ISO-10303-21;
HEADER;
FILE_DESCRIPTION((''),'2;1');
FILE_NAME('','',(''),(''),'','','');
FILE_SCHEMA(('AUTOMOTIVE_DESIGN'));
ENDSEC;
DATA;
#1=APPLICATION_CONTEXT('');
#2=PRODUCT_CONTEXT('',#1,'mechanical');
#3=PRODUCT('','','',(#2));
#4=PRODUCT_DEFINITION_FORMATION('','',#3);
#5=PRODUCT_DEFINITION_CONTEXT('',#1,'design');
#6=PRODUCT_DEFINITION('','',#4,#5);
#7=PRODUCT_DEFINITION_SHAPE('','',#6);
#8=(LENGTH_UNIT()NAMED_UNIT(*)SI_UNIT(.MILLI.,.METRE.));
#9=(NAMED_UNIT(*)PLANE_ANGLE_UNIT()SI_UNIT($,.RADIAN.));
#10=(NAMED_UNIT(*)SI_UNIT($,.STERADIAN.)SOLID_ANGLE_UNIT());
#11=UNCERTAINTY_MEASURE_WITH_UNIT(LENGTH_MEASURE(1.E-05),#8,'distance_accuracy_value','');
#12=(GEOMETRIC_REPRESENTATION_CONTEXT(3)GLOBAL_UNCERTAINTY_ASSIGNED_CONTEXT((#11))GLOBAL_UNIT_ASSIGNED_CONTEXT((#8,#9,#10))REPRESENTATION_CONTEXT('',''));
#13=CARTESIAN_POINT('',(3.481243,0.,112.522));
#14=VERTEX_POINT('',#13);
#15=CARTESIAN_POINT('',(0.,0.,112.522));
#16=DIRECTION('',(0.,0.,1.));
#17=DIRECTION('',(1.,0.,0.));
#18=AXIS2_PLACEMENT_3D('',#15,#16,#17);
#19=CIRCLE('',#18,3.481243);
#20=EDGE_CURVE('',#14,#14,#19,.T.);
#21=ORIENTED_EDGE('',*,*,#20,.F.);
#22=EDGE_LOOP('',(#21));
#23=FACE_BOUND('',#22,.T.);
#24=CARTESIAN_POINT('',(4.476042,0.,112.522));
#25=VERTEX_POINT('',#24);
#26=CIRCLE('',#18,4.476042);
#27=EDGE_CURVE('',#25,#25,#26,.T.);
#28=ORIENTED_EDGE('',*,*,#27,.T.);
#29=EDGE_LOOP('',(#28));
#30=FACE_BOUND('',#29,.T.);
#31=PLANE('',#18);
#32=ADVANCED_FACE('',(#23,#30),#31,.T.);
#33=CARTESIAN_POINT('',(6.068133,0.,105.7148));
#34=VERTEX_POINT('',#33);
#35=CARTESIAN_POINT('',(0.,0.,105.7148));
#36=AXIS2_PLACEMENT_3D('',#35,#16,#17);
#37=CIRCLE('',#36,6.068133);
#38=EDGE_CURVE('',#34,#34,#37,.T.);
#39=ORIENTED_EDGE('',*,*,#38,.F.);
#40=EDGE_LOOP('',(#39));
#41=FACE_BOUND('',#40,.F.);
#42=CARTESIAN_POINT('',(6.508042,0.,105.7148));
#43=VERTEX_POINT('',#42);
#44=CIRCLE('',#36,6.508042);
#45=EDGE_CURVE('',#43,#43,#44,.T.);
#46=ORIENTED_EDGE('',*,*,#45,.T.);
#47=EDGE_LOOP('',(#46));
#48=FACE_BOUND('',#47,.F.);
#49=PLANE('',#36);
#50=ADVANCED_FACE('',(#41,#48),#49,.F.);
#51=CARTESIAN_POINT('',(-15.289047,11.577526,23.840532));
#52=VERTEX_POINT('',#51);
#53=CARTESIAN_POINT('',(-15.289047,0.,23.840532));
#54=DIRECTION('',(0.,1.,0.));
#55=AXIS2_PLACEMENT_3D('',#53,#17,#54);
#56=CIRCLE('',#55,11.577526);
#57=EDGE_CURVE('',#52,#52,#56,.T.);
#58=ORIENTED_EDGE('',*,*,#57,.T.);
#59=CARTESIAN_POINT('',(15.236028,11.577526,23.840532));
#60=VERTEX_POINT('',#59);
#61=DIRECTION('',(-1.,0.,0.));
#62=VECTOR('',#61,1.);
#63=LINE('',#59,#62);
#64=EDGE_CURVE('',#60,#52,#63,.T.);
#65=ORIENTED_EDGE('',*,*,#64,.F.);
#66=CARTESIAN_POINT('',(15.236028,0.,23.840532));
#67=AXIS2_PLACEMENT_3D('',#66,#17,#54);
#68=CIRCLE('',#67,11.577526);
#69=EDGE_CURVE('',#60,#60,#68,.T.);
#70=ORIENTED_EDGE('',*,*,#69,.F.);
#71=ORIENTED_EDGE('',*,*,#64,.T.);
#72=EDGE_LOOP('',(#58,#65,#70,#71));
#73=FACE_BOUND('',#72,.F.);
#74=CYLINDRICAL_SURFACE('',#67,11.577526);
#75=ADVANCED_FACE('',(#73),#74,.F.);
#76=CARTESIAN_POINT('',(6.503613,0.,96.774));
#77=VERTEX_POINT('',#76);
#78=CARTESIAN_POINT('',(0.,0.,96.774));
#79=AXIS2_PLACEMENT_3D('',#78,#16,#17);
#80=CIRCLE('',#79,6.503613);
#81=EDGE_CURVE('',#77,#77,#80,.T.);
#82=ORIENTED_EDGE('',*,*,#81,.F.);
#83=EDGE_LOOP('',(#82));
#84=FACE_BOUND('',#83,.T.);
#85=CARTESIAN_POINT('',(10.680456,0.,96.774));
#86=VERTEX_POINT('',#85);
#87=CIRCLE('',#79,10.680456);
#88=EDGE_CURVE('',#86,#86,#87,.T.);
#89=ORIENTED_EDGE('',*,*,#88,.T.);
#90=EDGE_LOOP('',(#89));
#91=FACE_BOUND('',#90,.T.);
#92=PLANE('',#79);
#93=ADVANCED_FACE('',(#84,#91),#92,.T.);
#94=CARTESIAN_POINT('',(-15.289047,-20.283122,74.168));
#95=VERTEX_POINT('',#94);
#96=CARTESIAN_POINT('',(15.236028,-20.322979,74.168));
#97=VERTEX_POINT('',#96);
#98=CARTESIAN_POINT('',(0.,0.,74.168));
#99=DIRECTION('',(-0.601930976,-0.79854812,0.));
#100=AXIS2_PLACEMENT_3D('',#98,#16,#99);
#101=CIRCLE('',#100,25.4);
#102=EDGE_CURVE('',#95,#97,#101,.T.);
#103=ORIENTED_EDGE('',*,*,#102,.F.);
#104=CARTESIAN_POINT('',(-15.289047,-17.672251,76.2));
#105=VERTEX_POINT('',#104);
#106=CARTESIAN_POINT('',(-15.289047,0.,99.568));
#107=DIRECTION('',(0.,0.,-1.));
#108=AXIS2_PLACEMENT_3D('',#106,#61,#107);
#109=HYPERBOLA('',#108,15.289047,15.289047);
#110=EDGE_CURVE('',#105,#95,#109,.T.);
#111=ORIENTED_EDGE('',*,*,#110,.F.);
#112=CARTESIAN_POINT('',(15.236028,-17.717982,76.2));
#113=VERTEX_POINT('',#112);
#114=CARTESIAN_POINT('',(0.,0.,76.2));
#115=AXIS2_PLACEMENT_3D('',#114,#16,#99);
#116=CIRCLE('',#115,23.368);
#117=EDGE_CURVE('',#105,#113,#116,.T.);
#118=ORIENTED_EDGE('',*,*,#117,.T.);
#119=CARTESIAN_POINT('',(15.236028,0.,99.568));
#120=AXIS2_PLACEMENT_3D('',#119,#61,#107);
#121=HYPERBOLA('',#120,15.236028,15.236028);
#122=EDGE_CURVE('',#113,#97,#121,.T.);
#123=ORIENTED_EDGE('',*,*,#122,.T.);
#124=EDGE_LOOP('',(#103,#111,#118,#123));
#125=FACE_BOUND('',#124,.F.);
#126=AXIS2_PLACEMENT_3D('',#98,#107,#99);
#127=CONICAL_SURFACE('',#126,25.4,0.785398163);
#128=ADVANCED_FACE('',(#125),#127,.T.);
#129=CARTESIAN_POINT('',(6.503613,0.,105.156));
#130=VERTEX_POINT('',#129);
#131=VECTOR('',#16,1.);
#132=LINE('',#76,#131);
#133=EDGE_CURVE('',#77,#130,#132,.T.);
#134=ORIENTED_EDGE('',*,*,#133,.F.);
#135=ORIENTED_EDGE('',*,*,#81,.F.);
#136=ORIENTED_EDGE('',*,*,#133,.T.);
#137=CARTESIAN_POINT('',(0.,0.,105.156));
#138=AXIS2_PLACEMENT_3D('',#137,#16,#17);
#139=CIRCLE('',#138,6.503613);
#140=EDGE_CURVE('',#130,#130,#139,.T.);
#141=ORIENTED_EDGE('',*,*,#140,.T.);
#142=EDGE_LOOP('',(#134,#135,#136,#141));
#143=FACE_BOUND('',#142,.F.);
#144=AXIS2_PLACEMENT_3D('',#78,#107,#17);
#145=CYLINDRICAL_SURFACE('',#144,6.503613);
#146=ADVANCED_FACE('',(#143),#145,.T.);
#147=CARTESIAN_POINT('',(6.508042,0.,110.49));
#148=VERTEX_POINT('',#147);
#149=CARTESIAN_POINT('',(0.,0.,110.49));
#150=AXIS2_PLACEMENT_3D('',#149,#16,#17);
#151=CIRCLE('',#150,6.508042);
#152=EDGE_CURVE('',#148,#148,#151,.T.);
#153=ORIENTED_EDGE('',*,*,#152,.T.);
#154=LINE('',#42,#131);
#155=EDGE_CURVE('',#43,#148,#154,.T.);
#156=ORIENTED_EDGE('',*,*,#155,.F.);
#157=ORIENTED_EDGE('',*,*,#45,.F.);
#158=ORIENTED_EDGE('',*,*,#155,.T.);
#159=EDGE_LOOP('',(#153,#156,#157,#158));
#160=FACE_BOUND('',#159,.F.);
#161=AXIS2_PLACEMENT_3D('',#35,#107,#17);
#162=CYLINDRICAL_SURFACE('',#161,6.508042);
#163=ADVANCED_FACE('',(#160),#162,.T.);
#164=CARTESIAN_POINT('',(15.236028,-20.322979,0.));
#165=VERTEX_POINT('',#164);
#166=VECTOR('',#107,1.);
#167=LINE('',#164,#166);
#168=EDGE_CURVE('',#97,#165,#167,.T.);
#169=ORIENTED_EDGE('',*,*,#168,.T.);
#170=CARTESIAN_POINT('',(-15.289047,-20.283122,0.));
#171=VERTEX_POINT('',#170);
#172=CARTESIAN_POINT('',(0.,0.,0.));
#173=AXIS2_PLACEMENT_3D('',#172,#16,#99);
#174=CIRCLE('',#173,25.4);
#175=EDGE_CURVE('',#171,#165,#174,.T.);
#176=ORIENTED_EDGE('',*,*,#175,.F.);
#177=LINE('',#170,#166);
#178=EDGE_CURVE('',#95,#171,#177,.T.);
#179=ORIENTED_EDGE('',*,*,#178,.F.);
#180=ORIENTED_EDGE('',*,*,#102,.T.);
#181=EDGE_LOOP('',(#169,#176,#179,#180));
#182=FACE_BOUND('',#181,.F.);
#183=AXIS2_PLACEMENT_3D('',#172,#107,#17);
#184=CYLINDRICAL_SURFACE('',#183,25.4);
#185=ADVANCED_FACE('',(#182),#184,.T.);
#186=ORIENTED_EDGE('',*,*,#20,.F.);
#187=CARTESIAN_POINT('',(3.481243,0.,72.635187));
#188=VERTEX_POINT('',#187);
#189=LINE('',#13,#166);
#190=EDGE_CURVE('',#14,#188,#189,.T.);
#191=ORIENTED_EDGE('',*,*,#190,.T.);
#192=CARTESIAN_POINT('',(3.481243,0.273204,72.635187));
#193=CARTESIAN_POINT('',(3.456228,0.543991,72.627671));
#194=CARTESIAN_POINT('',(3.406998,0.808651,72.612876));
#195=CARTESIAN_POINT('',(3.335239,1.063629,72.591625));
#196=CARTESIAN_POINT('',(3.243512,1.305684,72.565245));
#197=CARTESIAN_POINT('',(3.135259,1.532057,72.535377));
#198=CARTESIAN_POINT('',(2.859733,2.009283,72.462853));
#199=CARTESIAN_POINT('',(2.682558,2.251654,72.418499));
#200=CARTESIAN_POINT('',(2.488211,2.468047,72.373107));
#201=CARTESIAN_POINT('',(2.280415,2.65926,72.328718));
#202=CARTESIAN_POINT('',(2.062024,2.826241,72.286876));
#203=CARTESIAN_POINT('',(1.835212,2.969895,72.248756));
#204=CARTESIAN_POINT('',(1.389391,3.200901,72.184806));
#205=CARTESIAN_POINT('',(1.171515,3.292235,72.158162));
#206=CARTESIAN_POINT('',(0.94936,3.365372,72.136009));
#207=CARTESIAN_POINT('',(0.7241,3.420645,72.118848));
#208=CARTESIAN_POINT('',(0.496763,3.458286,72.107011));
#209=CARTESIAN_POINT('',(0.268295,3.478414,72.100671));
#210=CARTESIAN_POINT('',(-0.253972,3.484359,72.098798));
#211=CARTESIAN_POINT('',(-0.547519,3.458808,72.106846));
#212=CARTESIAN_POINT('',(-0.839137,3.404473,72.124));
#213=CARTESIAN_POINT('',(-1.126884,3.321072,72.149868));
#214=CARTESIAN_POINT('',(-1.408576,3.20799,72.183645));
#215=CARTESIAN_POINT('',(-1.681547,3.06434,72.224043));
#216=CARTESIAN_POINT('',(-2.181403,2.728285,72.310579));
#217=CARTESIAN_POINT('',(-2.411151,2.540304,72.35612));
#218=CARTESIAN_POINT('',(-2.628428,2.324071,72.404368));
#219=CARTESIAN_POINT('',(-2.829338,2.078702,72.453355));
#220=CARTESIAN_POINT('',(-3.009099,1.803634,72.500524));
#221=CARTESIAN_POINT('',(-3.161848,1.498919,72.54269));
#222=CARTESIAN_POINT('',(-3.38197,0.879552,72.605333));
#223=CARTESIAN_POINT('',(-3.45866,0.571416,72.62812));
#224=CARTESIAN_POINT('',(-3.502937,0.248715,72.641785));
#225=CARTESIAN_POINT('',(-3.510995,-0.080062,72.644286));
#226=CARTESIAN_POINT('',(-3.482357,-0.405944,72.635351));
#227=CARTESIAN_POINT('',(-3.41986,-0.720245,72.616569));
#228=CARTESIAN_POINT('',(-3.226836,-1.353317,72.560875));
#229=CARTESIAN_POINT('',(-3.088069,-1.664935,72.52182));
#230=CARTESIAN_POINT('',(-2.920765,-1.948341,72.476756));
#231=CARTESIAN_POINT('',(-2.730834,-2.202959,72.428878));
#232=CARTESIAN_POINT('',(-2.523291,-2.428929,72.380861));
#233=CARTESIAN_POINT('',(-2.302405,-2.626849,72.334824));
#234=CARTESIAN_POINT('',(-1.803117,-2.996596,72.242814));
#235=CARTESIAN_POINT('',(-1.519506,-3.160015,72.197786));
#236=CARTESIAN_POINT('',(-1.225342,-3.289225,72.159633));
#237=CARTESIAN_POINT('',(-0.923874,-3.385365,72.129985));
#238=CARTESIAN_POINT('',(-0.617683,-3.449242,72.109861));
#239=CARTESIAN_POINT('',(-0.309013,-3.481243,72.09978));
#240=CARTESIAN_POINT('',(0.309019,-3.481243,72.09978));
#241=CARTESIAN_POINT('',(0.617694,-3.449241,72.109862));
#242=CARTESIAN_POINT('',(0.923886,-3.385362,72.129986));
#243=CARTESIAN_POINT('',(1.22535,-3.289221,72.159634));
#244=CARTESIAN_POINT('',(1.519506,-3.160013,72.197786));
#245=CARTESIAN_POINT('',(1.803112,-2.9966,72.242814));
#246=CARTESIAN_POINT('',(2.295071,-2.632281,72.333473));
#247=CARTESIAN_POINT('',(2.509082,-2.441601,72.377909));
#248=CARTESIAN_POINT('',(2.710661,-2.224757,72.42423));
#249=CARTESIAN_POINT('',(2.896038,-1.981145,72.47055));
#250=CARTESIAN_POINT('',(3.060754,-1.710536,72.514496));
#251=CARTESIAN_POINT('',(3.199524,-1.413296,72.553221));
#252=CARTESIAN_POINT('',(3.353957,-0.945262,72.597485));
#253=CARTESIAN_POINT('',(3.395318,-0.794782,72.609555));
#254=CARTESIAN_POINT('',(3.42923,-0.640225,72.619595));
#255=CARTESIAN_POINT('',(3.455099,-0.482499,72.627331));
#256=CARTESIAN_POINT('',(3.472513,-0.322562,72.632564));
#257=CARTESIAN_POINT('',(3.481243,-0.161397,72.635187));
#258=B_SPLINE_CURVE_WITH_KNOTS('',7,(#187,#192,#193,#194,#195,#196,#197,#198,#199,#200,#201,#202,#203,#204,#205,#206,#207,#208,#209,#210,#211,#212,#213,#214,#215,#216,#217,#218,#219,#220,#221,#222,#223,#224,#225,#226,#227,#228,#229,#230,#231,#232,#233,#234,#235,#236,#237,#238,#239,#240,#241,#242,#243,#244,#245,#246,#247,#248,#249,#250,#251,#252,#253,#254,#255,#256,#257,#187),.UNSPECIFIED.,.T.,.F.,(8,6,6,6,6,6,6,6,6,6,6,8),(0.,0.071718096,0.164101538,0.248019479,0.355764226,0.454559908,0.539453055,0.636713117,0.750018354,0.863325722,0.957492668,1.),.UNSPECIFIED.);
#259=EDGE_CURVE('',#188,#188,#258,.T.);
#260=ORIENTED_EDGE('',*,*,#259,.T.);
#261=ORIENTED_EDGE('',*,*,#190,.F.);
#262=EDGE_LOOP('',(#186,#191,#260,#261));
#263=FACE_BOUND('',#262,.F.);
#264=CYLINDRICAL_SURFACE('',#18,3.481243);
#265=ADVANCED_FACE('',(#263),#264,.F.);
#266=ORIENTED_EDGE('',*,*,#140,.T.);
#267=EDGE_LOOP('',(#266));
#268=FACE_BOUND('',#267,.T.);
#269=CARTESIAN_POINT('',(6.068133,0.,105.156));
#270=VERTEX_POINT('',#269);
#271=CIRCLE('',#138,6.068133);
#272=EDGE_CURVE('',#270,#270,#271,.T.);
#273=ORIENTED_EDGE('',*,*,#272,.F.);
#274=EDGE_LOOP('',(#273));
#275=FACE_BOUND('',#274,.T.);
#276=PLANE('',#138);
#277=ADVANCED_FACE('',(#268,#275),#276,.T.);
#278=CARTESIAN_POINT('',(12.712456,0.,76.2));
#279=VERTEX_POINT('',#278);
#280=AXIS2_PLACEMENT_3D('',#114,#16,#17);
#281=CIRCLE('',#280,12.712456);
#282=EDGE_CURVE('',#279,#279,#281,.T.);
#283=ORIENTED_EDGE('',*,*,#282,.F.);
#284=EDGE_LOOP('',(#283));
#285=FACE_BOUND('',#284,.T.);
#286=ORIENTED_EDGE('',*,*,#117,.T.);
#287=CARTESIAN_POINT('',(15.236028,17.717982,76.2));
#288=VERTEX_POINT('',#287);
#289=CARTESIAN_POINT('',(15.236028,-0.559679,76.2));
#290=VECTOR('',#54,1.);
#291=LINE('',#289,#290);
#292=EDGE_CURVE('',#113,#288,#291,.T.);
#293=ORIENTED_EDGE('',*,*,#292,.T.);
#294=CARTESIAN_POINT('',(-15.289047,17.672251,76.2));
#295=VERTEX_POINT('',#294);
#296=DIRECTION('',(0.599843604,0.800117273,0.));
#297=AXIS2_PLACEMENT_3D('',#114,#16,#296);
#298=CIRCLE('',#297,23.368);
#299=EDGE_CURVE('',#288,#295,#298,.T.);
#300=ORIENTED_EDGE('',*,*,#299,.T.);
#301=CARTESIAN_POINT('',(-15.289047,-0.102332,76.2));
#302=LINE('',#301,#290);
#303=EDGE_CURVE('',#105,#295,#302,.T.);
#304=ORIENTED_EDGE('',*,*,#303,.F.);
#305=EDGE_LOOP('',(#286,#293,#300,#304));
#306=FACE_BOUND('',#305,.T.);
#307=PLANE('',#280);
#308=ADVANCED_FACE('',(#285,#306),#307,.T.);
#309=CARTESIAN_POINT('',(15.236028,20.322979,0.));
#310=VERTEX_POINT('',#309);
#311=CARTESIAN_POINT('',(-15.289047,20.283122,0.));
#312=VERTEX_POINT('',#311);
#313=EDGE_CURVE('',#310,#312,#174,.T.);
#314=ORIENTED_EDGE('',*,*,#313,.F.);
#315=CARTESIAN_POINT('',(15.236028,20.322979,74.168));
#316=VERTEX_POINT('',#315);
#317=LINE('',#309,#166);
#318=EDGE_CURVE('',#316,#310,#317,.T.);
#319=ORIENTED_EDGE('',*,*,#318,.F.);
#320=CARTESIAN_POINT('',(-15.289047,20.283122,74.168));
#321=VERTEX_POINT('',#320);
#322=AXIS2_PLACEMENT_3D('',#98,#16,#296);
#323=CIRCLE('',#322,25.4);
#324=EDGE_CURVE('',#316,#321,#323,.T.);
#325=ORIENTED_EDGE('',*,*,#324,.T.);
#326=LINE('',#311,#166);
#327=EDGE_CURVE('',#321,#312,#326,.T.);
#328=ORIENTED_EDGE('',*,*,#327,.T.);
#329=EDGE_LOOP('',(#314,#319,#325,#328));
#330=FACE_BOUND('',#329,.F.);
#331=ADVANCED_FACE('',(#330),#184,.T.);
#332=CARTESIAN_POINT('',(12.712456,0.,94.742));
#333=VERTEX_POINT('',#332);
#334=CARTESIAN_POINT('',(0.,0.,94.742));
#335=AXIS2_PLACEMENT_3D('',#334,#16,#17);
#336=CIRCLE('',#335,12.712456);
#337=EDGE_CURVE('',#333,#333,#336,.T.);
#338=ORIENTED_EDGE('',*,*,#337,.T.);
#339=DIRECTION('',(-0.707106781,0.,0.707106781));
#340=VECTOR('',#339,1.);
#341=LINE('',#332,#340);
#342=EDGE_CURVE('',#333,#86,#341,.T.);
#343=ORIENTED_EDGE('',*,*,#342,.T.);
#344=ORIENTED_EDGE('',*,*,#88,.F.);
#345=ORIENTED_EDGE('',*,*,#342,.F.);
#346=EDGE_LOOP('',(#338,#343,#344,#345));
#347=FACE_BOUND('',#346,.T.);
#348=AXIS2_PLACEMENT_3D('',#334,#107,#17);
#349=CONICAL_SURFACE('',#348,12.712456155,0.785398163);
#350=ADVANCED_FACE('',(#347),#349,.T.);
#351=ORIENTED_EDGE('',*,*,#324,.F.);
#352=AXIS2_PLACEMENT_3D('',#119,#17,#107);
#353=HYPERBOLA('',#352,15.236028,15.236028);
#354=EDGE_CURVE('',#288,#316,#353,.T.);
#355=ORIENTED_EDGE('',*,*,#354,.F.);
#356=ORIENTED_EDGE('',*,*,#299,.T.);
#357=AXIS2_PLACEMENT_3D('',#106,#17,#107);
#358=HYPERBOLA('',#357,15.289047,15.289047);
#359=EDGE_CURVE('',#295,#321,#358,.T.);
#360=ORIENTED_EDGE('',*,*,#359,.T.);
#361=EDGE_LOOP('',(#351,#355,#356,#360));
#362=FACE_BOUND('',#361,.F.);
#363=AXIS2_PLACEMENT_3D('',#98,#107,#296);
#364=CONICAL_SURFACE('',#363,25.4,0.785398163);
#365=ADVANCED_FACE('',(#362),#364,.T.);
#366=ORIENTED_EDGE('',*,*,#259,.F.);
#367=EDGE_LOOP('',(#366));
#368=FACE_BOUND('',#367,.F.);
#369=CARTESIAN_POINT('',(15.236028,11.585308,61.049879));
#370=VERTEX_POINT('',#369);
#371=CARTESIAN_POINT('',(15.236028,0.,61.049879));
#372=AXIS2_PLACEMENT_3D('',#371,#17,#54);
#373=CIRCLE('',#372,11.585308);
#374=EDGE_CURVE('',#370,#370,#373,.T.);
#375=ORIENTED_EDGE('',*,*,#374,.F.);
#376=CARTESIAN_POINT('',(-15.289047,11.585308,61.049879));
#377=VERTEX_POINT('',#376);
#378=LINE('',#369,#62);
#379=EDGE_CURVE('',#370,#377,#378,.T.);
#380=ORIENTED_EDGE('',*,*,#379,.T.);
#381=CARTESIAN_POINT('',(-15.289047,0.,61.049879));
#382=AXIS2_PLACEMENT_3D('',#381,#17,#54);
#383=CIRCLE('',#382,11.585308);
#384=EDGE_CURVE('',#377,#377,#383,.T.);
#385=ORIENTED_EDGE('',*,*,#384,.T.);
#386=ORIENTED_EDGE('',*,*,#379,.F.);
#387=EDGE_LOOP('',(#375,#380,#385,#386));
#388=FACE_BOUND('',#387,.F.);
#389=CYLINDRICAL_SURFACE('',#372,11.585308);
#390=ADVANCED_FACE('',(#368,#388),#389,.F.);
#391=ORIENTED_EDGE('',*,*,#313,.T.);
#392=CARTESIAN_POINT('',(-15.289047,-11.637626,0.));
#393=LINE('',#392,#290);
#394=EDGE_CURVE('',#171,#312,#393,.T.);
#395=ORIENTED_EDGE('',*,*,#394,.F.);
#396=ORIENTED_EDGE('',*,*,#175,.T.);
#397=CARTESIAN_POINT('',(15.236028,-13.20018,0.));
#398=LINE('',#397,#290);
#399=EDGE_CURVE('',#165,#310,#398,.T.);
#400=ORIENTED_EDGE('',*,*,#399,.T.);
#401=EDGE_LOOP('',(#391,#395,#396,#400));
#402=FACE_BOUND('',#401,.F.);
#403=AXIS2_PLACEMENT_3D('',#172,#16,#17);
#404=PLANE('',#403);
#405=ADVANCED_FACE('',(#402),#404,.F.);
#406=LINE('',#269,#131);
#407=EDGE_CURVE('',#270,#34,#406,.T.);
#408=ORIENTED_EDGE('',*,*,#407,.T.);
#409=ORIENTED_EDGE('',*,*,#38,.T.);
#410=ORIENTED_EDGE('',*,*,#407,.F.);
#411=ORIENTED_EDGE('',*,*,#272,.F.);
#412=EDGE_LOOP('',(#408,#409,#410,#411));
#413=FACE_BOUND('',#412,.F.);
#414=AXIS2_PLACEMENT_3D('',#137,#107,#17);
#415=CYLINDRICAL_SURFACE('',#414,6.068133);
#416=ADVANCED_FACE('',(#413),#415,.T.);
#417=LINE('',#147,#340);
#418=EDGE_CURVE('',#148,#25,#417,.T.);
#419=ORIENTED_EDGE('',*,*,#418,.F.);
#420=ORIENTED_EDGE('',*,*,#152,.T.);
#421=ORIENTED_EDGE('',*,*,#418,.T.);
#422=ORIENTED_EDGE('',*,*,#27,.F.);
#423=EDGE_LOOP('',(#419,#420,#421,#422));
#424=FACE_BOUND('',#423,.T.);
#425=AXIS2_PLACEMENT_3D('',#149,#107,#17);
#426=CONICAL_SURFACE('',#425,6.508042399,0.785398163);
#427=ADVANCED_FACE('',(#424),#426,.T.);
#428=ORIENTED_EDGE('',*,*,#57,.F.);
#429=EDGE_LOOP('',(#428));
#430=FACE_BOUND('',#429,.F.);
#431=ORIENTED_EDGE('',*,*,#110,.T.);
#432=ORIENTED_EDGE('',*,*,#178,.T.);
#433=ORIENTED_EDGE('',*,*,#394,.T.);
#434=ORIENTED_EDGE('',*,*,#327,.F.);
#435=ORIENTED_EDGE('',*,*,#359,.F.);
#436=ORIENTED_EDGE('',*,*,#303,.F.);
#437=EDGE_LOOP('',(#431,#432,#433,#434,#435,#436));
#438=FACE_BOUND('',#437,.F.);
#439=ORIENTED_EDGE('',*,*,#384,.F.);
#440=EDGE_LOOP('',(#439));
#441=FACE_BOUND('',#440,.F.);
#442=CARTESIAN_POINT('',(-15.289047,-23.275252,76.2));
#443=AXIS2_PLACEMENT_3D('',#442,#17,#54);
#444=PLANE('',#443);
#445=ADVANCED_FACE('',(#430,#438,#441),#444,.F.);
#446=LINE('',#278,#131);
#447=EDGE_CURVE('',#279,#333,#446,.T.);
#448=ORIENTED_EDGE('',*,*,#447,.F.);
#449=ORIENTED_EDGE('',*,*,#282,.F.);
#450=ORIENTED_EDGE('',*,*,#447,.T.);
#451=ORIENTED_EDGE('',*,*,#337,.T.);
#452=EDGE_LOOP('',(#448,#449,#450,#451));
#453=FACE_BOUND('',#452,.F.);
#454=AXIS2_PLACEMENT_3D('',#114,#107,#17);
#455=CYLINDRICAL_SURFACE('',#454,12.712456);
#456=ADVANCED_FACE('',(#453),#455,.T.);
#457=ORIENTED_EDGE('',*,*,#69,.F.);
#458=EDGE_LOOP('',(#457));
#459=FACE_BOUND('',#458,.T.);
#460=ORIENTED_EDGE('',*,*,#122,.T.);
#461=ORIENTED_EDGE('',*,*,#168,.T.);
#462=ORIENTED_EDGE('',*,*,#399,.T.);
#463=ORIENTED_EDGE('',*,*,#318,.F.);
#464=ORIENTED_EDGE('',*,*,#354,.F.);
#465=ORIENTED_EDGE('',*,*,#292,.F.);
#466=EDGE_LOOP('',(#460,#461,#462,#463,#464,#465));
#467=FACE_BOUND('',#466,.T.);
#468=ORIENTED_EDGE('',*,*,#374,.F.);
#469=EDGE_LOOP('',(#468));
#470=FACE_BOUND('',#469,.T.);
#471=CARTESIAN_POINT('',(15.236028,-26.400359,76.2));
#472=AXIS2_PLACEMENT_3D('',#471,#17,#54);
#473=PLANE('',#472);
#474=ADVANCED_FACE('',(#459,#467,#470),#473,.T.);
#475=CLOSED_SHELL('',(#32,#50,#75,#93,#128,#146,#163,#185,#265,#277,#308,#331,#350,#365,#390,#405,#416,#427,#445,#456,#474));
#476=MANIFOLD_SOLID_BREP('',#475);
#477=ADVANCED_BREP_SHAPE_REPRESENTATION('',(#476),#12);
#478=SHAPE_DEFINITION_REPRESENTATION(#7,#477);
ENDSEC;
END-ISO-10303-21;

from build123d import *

# Parameters (mm, degrees)
F0_R      = 25.4
F1_DEPTH  = 76.2
F2_R      = 12.7124561547
F3_DEPTH  = 20.574
F4_R      = 6.5036133295
F5_DEPTH  = 8.382
F6_R      = 5.5261881266
F7_DEPTH  = 0.3556
F8_R      = 6.0681325209
F9_DEPTH  = 0.5588
F10_R     = 6.5080423993
F11_DEPTH = 6.8072
F12_W     = 12.8267863765
F12_H     = 46.3458411396
F13_DEPTH = 254
F14_W     = 15.4017303139
F14_H     = 51.6813602298
F15_DEPTH = 254
F16_R     = 11.58530812
F17_DEPTH = 254
F18_R     = 11.5775255265
F19_DEPTH = 254
F20_SIZE  = 2.032
F21_SIZE  = 2.032
F24_R     = 3.4812427805
F25_DEPTH = 50.8


# Not quite as in the source:
# - two fillets or chamfers of one size are made in one step


with BuildPart() as f1:
    # F0 (on Top) → F1 (new body)
    with BuildSketch(Plane.XY):
        Circle(F0_R)
    extrude(amount=F1_DEPTH)

    # F2 (on face) → F3 (join)
    with BuildSketch(Plane.XY.offset(76.2)):
        Circle(F2_R)
    extrude(amount=F3_DEPTH)

    # F4 (on face) → F5 (join)
    with BuildSketch(Plane.XY.offset(96.774)):
        Circle(F4_R)
    extrude(amount=F5_DEPTH)

    # F6 (on face) → F7 (join)
    with BuildSketch(Plane.XY.offset(105.156)):
        Circle(F6_R)
    extrude(amount=-F7_DEPTH)

    # F8 (on face) → F9 (join)
    with BuildSketch(Plane.XY.offset(105.156)):
        Circle(F8_R)
    extrude(amount=F9_DEPTH)

    # F10 (on face) → F11 (join)
    with BuildSketch(Plane.XY.offset(105.7148)):
        Circle(F10_R)
    extrude(amount=F11_DEPTH)

    # F12 (on face) → F13 (cut)
    with BuildSketch(Plane.XY.offset(76.2)):
        with Locations((-21.7024399899, -0.1023318619)):
            Rectangle(F12_W, F12_H)
    extrude(amount=-F13_DEPTH, mode=Mode.SUBTRACT)

    # F14 (on face) → F15 (cut)
    with BuildSketch(Plane.XY.offset(76.2)):
        with Locations((22.9368926957, -0.5596792325)):
            Rectangle(F14_W, F14_H)
    extrude(amount=-F15_DEPTH, mode=Mode.SUBTRACT)

    # F16 (on face) → F17 (cut)
    with BuildSketch(Plane.YZ.offset(15.2360275388)):
        with Locations((0, 61.0498785973)):
            Circle(F16_R)
    extrude(amount=-F17_DEPTH, mode=Mode.SUBTRACT)

    # F18 (on face) → F19 (cut)
    with BuildSketch(Plane.YZ.offset(15.2360275388)):
        with Locations((0, 23.8405317068)):
            Circle(F18_R)
    extrude(amount=-F19_DEPTH, mode=Mode.SUBTRACT)

    # F20
    f20_edges = [f1.edges().sort_by_distance(p)[0] for p in [
        (-0.033165, 25.399978, 76.2),
        (-0.033165, -25.399978, 76.2),
    ]]
    chamfer(f20_edges, length=F20_SIZE)

    # F21
    f21_edges = [f1.edges().sort_by_distance(p)[0] for p in [
        (-12.712456, 0, 96.774),
        (-6.508042, 0, 112.522),
    ]]
    chamfer(f21_edges, length=F21_SIZE)

    # F24 (on face) → F25 (cut)
    with BuildSketch(Plane.XY.offset(112.522)):
        Circle(F24_R)
    extrude(amount=-F25_DEPTH, mode=Mode.SUBTRACT)


solid = f1.part
